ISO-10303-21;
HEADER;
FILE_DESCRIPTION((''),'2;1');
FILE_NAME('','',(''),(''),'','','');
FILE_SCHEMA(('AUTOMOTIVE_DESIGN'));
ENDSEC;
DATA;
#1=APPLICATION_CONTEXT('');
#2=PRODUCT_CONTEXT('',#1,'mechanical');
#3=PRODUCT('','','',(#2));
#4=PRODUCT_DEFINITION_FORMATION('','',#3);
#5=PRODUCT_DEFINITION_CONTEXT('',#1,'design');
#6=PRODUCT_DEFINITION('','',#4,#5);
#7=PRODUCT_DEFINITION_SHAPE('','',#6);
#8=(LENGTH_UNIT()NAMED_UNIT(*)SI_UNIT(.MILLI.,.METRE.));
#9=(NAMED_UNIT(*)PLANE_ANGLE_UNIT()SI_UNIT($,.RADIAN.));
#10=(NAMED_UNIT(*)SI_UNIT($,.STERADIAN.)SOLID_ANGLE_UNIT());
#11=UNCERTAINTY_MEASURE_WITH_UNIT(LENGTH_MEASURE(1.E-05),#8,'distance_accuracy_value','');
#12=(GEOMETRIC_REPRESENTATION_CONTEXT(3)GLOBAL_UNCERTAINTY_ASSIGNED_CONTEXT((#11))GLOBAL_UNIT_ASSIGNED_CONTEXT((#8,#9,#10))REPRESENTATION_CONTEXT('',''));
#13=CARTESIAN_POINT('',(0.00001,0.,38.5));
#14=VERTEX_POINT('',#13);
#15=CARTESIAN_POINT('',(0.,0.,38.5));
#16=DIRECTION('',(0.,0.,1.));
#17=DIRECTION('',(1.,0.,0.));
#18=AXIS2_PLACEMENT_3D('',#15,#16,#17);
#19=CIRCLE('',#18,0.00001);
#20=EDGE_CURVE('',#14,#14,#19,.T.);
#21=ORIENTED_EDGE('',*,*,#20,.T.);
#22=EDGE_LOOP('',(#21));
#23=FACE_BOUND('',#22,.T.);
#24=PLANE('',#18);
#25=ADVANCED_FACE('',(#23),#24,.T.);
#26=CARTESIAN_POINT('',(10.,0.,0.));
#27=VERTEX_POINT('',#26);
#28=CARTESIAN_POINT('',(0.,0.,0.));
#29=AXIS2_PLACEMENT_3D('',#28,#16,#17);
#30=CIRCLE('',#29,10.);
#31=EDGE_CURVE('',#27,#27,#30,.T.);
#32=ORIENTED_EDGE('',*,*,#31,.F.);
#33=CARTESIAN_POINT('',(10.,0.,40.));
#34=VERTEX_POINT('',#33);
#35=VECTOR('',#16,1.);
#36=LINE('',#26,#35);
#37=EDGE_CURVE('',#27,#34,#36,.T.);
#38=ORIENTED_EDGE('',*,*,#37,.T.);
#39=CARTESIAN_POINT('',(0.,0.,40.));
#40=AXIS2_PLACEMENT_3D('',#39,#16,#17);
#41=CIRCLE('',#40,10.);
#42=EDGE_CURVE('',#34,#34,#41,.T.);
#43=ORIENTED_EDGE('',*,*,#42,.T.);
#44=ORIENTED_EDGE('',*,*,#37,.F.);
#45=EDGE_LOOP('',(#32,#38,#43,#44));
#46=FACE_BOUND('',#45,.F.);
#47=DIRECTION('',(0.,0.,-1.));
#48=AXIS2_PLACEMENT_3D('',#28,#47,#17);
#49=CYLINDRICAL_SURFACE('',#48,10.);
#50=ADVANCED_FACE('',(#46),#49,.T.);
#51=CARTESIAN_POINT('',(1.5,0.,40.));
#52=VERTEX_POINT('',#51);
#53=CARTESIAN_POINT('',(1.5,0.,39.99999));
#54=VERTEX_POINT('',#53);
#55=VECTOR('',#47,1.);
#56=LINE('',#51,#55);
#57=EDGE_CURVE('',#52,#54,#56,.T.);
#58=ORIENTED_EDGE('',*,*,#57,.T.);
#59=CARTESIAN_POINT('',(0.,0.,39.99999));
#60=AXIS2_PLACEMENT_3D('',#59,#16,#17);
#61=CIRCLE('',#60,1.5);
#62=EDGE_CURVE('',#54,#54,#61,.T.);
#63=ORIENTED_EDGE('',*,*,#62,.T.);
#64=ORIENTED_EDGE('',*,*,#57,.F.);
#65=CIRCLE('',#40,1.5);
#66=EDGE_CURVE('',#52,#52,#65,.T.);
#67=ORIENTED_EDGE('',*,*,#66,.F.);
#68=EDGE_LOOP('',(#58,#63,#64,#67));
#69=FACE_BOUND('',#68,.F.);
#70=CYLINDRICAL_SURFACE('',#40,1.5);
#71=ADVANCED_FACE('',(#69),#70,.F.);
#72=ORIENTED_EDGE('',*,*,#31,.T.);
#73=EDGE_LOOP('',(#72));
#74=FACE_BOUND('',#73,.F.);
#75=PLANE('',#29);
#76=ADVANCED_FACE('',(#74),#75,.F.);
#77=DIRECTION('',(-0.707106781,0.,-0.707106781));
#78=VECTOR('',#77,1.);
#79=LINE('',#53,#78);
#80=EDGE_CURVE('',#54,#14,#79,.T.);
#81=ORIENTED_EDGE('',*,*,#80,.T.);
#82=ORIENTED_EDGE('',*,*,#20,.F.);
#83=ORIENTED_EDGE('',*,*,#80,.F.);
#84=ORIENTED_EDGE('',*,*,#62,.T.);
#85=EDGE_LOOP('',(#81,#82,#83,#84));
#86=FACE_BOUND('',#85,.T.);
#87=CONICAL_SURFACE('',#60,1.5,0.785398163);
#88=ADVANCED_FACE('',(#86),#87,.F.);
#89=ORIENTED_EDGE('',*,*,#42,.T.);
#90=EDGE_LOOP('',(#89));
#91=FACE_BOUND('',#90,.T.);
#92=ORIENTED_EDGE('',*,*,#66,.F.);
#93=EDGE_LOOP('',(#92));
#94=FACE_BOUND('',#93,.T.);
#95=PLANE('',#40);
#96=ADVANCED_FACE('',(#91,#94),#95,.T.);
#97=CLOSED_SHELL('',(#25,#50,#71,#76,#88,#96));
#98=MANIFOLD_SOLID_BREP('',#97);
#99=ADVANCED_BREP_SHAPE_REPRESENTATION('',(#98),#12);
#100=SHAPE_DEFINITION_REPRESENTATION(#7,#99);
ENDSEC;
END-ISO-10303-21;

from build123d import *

# Parameters (mm, degrees)
F0_R     = 10
F1_DEPTH = 40
F2_R     = 1.5
F3_DEPTH = 1.5
F4_SIZE  = 1.49999


# Not quite as in the source:
# - a fillet or chamfer is up to 0.001 mm smaller than in the source, because OpenCascade refuses the exact size


with BuildPart() as f1:
    # F0 (on Top) → F1 (new body)
    with BuildSketch(Plane.XY):
        Circle(F0_R)
    extrude(amount=F1_DEPTH)

    # F2 (on face) → F3 (cut)
    with BuildSketch(Plane.XY.offset(40)):
        Circle(F2_R)
    extrude(amount=-F3_DEPTH, mode=Mode.SUBTRACT)

    # F4 (size 1.5 in the source; OpenCascade refuses exactly that, so slightly less here)
    f4_edges = [f1.edges().sort_by_distance(p)[0] for p in [
        (-1.5, 0, 38.5),
    ]]
    chamfer(f4_edges, length=F4_SIZE)


solid = f1.part
